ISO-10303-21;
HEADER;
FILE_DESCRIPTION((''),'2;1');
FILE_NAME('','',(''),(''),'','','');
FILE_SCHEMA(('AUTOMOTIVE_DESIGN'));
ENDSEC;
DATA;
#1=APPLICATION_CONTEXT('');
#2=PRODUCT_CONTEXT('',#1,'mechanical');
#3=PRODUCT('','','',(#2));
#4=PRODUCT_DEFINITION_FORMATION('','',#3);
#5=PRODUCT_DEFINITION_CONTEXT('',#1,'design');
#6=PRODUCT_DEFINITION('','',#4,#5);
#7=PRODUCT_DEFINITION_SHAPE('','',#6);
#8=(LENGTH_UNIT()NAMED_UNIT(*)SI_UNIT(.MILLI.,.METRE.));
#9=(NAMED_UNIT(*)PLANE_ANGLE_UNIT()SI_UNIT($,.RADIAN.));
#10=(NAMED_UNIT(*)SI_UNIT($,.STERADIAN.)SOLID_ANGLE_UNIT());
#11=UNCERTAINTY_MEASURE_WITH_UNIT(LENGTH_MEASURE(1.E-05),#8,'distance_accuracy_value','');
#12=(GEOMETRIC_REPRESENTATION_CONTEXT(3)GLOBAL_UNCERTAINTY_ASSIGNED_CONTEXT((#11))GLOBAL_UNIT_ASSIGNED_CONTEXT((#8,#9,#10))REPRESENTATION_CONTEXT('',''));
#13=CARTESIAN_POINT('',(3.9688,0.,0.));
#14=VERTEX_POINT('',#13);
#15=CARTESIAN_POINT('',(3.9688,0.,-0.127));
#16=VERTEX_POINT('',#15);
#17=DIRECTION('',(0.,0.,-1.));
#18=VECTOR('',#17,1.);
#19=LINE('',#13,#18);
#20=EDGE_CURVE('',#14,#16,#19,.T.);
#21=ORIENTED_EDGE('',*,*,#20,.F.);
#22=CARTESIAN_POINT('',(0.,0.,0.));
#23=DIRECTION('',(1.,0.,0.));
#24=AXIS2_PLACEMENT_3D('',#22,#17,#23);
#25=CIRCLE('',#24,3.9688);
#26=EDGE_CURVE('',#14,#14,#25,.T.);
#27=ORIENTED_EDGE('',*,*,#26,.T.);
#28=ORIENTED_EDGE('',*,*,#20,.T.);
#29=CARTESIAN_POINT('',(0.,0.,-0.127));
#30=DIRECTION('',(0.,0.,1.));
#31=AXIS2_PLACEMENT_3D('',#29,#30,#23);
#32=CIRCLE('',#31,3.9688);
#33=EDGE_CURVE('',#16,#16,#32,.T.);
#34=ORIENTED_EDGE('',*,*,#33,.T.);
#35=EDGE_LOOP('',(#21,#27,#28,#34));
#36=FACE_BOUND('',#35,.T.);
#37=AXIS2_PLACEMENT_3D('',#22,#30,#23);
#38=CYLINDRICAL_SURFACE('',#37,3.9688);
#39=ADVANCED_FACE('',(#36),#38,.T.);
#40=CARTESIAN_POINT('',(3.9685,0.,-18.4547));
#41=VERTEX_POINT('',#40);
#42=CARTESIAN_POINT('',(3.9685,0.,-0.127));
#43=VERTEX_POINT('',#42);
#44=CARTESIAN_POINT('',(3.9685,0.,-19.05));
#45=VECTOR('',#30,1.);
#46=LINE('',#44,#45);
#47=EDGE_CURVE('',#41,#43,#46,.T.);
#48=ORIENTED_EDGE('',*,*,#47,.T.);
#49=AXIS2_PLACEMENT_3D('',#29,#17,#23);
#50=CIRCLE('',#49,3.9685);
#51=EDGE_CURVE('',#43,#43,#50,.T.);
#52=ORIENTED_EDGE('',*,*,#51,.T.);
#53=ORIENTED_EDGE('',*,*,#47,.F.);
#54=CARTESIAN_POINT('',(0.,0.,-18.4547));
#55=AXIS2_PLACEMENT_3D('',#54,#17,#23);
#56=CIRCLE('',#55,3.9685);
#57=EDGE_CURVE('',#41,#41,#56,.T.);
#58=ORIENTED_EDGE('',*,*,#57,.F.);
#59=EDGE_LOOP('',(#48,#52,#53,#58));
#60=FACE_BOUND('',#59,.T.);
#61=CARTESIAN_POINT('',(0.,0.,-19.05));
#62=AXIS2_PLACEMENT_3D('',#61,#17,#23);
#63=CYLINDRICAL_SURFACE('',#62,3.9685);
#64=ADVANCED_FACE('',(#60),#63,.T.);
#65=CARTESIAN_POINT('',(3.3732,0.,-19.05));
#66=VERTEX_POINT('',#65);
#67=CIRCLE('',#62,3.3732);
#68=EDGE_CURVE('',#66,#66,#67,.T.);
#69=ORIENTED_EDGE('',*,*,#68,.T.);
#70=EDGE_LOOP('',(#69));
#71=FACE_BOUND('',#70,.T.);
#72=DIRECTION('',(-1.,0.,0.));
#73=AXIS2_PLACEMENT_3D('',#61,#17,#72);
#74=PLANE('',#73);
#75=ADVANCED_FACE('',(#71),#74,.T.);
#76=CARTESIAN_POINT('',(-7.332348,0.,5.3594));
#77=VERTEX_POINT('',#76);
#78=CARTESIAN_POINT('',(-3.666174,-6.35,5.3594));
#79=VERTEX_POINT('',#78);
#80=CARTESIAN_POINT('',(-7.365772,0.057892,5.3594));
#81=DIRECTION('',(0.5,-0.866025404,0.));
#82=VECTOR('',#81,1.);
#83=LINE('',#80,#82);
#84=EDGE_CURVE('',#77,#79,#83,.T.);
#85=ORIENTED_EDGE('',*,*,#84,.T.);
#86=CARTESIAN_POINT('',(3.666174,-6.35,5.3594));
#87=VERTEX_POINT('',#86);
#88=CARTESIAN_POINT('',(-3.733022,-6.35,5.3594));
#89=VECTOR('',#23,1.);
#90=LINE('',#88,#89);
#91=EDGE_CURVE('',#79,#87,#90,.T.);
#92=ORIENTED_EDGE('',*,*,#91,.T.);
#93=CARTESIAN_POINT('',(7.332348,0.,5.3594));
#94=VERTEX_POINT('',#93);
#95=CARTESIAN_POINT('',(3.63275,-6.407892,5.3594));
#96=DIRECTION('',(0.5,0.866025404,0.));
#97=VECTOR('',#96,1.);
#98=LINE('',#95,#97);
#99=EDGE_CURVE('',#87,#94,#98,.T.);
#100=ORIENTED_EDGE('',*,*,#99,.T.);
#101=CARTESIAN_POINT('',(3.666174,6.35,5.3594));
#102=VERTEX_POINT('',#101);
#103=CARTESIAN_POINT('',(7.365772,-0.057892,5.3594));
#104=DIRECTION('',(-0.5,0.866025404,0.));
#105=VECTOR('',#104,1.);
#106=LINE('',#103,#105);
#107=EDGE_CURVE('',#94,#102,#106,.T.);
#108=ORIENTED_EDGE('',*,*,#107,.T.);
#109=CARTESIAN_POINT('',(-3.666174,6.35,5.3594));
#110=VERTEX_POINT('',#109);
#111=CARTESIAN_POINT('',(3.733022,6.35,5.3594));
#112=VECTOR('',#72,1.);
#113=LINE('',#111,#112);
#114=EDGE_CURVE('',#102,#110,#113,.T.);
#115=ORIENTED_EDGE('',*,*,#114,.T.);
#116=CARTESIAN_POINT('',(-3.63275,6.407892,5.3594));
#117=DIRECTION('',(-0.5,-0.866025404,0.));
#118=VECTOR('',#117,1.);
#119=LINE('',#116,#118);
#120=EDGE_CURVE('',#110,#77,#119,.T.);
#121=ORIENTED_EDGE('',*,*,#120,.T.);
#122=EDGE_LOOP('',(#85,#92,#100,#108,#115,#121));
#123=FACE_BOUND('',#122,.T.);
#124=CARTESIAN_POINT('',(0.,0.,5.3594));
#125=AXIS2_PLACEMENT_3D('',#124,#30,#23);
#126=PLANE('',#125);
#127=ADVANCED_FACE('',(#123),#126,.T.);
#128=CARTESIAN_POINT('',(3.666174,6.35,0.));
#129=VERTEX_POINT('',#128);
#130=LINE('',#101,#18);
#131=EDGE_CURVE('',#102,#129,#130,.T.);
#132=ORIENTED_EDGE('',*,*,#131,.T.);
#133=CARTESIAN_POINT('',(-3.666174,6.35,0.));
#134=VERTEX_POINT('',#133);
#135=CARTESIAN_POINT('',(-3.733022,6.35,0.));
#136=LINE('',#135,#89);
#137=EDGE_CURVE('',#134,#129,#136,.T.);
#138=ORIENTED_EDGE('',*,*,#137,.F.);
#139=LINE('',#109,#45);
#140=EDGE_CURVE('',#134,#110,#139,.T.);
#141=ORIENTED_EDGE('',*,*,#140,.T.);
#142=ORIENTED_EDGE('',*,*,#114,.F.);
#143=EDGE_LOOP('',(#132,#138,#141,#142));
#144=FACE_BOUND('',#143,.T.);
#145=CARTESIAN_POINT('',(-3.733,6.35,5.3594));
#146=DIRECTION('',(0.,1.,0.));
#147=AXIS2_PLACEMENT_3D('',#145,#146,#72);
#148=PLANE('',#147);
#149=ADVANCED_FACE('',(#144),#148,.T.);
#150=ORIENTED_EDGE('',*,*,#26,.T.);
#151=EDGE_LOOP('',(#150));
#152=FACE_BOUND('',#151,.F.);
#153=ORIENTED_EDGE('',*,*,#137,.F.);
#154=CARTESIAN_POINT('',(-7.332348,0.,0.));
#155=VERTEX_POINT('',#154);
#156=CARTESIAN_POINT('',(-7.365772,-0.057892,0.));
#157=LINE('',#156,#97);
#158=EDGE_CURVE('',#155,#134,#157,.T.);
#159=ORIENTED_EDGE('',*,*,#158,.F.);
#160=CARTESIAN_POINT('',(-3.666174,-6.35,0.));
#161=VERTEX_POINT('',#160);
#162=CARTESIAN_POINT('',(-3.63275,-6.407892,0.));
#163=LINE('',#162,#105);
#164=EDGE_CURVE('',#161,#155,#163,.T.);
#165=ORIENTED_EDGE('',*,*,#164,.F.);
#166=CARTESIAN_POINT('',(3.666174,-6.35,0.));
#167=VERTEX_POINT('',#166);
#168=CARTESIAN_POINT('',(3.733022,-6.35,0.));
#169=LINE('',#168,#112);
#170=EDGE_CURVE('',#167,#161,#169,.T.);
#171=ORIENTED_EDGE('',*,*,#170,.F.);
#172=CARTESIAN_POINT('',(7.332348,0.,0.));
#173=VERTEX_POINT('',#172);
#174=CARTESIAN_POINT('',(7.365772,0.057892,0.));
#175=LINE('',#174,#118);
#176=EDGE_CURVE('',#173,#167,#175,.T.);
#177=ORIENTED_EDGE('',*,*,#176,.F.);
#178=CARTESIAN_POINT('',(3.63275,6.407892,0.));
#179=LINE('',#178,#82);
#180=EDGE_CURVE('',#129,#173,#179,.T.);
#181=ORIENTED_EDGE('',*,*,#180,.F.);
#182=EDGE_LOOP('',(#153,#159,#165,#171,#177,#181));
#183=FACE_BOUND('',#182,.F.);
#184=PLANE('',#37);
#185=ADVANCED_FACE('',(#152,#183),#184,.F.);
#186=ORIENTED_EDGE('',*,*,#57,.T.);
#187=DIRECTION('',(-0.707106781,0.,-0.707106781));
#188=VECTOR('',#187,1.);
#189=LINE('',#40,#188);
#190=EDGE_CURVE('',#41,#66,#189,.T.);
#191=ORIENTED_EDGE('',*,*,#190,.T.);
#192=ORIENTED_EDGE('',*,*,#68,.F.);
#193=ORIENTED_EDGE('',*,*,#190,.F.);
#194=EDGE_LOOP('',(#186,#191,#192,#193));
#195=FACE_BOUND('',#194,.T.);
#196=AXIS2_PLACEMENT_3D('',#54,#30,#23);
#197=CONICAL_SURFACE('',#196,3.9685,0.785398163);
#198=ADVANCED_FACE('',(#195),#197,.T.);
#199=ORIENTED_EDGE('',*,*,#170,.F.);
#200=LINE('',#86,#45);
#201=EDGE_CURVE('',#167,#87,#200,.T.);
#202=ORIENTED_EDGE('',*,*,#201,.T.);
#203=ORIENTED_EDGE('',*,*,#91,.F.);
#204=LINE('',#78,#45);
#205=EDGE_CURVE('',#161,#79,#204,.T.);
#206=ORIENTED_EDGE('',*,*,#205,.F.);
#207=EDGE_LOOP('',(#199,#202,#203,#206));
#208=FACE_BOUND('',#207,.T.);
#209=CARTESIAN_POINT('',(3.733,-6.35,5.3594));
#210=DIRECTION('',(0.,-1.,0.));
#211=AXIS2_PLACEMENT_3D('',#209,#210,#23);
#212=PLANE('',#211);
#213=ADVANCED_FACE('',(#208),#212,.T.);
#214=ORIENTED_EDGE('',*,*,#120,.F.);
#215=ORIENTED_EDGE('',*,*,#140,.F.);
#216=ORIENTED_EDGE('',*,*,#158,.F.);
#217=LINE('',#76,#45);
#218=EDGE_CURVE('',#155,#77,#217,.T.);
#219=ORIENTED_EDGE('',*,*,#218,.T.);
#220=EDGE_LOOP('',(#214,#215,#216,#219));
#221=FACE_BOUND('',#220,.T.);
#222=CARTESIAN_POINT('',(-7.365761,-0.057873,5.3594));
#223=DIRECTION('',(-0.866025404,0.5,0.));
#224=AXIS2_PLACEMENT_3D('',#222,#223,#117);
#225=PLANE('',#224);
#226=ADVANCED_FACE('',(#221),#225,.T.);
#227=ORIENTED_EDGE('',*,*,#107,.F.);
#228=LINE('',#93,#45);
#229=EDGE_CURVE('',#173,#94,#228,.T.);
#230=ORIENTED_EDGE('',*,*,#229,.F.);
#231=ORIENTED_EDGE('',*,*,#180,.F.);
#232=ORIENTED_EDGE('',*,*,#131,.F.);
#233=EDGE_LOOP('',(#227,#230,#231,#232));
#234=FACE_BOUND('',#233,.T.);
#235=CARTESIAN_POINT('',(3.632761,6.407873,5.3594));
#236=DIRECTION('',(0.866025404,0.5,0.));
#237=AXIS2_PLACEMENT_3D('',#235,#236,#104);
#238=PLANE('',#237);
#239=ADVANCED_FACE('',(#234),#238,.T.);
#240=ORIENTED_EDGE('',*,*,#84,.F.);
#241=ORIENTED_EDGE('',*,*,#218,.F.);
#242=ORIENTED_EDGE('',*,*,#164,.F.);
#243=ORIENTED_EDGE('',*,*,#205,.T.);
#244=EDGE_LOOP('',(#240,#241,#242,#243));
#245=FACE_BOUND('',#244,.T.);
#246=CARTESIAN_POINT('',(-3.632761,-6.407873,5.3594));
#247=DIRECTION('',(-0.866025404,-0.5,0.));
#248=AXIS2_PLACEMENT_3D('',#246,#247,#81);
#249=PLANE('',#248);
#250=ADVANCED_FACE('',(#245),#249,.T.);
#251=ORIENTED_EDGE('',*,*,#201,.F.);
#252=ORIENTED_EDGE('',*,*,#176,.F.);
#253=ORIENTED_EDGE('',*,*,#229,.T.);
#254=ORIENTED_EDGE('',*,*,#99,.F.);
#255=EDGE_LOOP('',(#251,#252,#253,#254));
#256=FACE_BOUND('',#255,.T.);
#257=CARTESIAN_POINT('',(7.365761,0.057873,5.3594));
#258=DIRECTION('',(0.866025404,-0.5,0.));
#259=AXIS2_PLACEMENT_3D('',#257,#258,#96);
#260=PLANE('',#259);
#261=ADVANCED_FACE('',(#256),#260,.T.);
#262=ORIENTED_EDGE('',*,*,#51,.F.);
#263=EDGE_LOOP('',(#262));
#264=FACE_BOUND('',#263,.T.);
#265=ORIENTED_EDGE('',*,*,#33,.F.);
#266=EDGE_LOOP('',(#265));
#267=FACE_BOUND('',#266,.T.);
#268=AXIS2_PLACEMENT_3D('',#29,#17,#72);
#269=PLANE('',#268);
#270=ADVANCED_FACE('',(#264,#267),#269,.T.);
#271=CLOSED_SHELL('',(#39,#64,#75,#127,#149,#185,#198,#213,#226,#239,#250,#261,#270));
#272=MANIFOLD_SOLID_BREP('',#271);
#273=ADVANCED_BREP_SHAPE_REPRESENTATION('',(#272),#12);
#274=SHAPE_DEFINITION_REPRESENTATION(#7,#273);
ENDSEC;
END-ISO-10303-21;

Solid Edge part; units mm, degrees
sketch "Sketch1" plane through (0, 0, 0) normal (0, 0, 1) x (1, 0, 0)
  circle A0 centre (0, 0) radius 7.366
  dimension "D1" = 14.732
extrude "Protrusion1" add sketch "Sketch1" along normal blind 5.3594
sketch "Sketch2" plane through (0, 0, 0) normal (0, 0, -1) x (1, 0, 0)
  circle A0 centre (0, 0) radius 3.9688
extrude "Protrusion2" add sketch "Sketch2" along normal blind 19.05
sketch "Sketch3" plane through (0, 0, -19.05) normal (0, 0, -1) x (1, 0, 0)
  circle A0 centre (0, 0) radius 3.9685
extrude "Cutout1" cut sketch "Sketch3" against normal blind 18.923 flip side to cut
chamfer "Chamfer_1" distance 0.5953 angle 45 1 edges at (-3.9685, 0, -19.05)
sketch "Sketch4" plane through (0, 0, 5.3594) normal (0, 0, 1) x (1, 0, 0)
  line L0 (-3.733, 6.35) -> (3.733, 6.35)
  dimension "D1" = 12.7
extrude "Cutout2" cut sketch "Sketch4" against normal up to next material side at (0, 6.4, 5.3594)
pattern_circular "Pattern1" count 6 over 360 about axis through (0, 0, 5.3594) along (0, 0, 1) of "Cutout2"
properties part number "116427"
